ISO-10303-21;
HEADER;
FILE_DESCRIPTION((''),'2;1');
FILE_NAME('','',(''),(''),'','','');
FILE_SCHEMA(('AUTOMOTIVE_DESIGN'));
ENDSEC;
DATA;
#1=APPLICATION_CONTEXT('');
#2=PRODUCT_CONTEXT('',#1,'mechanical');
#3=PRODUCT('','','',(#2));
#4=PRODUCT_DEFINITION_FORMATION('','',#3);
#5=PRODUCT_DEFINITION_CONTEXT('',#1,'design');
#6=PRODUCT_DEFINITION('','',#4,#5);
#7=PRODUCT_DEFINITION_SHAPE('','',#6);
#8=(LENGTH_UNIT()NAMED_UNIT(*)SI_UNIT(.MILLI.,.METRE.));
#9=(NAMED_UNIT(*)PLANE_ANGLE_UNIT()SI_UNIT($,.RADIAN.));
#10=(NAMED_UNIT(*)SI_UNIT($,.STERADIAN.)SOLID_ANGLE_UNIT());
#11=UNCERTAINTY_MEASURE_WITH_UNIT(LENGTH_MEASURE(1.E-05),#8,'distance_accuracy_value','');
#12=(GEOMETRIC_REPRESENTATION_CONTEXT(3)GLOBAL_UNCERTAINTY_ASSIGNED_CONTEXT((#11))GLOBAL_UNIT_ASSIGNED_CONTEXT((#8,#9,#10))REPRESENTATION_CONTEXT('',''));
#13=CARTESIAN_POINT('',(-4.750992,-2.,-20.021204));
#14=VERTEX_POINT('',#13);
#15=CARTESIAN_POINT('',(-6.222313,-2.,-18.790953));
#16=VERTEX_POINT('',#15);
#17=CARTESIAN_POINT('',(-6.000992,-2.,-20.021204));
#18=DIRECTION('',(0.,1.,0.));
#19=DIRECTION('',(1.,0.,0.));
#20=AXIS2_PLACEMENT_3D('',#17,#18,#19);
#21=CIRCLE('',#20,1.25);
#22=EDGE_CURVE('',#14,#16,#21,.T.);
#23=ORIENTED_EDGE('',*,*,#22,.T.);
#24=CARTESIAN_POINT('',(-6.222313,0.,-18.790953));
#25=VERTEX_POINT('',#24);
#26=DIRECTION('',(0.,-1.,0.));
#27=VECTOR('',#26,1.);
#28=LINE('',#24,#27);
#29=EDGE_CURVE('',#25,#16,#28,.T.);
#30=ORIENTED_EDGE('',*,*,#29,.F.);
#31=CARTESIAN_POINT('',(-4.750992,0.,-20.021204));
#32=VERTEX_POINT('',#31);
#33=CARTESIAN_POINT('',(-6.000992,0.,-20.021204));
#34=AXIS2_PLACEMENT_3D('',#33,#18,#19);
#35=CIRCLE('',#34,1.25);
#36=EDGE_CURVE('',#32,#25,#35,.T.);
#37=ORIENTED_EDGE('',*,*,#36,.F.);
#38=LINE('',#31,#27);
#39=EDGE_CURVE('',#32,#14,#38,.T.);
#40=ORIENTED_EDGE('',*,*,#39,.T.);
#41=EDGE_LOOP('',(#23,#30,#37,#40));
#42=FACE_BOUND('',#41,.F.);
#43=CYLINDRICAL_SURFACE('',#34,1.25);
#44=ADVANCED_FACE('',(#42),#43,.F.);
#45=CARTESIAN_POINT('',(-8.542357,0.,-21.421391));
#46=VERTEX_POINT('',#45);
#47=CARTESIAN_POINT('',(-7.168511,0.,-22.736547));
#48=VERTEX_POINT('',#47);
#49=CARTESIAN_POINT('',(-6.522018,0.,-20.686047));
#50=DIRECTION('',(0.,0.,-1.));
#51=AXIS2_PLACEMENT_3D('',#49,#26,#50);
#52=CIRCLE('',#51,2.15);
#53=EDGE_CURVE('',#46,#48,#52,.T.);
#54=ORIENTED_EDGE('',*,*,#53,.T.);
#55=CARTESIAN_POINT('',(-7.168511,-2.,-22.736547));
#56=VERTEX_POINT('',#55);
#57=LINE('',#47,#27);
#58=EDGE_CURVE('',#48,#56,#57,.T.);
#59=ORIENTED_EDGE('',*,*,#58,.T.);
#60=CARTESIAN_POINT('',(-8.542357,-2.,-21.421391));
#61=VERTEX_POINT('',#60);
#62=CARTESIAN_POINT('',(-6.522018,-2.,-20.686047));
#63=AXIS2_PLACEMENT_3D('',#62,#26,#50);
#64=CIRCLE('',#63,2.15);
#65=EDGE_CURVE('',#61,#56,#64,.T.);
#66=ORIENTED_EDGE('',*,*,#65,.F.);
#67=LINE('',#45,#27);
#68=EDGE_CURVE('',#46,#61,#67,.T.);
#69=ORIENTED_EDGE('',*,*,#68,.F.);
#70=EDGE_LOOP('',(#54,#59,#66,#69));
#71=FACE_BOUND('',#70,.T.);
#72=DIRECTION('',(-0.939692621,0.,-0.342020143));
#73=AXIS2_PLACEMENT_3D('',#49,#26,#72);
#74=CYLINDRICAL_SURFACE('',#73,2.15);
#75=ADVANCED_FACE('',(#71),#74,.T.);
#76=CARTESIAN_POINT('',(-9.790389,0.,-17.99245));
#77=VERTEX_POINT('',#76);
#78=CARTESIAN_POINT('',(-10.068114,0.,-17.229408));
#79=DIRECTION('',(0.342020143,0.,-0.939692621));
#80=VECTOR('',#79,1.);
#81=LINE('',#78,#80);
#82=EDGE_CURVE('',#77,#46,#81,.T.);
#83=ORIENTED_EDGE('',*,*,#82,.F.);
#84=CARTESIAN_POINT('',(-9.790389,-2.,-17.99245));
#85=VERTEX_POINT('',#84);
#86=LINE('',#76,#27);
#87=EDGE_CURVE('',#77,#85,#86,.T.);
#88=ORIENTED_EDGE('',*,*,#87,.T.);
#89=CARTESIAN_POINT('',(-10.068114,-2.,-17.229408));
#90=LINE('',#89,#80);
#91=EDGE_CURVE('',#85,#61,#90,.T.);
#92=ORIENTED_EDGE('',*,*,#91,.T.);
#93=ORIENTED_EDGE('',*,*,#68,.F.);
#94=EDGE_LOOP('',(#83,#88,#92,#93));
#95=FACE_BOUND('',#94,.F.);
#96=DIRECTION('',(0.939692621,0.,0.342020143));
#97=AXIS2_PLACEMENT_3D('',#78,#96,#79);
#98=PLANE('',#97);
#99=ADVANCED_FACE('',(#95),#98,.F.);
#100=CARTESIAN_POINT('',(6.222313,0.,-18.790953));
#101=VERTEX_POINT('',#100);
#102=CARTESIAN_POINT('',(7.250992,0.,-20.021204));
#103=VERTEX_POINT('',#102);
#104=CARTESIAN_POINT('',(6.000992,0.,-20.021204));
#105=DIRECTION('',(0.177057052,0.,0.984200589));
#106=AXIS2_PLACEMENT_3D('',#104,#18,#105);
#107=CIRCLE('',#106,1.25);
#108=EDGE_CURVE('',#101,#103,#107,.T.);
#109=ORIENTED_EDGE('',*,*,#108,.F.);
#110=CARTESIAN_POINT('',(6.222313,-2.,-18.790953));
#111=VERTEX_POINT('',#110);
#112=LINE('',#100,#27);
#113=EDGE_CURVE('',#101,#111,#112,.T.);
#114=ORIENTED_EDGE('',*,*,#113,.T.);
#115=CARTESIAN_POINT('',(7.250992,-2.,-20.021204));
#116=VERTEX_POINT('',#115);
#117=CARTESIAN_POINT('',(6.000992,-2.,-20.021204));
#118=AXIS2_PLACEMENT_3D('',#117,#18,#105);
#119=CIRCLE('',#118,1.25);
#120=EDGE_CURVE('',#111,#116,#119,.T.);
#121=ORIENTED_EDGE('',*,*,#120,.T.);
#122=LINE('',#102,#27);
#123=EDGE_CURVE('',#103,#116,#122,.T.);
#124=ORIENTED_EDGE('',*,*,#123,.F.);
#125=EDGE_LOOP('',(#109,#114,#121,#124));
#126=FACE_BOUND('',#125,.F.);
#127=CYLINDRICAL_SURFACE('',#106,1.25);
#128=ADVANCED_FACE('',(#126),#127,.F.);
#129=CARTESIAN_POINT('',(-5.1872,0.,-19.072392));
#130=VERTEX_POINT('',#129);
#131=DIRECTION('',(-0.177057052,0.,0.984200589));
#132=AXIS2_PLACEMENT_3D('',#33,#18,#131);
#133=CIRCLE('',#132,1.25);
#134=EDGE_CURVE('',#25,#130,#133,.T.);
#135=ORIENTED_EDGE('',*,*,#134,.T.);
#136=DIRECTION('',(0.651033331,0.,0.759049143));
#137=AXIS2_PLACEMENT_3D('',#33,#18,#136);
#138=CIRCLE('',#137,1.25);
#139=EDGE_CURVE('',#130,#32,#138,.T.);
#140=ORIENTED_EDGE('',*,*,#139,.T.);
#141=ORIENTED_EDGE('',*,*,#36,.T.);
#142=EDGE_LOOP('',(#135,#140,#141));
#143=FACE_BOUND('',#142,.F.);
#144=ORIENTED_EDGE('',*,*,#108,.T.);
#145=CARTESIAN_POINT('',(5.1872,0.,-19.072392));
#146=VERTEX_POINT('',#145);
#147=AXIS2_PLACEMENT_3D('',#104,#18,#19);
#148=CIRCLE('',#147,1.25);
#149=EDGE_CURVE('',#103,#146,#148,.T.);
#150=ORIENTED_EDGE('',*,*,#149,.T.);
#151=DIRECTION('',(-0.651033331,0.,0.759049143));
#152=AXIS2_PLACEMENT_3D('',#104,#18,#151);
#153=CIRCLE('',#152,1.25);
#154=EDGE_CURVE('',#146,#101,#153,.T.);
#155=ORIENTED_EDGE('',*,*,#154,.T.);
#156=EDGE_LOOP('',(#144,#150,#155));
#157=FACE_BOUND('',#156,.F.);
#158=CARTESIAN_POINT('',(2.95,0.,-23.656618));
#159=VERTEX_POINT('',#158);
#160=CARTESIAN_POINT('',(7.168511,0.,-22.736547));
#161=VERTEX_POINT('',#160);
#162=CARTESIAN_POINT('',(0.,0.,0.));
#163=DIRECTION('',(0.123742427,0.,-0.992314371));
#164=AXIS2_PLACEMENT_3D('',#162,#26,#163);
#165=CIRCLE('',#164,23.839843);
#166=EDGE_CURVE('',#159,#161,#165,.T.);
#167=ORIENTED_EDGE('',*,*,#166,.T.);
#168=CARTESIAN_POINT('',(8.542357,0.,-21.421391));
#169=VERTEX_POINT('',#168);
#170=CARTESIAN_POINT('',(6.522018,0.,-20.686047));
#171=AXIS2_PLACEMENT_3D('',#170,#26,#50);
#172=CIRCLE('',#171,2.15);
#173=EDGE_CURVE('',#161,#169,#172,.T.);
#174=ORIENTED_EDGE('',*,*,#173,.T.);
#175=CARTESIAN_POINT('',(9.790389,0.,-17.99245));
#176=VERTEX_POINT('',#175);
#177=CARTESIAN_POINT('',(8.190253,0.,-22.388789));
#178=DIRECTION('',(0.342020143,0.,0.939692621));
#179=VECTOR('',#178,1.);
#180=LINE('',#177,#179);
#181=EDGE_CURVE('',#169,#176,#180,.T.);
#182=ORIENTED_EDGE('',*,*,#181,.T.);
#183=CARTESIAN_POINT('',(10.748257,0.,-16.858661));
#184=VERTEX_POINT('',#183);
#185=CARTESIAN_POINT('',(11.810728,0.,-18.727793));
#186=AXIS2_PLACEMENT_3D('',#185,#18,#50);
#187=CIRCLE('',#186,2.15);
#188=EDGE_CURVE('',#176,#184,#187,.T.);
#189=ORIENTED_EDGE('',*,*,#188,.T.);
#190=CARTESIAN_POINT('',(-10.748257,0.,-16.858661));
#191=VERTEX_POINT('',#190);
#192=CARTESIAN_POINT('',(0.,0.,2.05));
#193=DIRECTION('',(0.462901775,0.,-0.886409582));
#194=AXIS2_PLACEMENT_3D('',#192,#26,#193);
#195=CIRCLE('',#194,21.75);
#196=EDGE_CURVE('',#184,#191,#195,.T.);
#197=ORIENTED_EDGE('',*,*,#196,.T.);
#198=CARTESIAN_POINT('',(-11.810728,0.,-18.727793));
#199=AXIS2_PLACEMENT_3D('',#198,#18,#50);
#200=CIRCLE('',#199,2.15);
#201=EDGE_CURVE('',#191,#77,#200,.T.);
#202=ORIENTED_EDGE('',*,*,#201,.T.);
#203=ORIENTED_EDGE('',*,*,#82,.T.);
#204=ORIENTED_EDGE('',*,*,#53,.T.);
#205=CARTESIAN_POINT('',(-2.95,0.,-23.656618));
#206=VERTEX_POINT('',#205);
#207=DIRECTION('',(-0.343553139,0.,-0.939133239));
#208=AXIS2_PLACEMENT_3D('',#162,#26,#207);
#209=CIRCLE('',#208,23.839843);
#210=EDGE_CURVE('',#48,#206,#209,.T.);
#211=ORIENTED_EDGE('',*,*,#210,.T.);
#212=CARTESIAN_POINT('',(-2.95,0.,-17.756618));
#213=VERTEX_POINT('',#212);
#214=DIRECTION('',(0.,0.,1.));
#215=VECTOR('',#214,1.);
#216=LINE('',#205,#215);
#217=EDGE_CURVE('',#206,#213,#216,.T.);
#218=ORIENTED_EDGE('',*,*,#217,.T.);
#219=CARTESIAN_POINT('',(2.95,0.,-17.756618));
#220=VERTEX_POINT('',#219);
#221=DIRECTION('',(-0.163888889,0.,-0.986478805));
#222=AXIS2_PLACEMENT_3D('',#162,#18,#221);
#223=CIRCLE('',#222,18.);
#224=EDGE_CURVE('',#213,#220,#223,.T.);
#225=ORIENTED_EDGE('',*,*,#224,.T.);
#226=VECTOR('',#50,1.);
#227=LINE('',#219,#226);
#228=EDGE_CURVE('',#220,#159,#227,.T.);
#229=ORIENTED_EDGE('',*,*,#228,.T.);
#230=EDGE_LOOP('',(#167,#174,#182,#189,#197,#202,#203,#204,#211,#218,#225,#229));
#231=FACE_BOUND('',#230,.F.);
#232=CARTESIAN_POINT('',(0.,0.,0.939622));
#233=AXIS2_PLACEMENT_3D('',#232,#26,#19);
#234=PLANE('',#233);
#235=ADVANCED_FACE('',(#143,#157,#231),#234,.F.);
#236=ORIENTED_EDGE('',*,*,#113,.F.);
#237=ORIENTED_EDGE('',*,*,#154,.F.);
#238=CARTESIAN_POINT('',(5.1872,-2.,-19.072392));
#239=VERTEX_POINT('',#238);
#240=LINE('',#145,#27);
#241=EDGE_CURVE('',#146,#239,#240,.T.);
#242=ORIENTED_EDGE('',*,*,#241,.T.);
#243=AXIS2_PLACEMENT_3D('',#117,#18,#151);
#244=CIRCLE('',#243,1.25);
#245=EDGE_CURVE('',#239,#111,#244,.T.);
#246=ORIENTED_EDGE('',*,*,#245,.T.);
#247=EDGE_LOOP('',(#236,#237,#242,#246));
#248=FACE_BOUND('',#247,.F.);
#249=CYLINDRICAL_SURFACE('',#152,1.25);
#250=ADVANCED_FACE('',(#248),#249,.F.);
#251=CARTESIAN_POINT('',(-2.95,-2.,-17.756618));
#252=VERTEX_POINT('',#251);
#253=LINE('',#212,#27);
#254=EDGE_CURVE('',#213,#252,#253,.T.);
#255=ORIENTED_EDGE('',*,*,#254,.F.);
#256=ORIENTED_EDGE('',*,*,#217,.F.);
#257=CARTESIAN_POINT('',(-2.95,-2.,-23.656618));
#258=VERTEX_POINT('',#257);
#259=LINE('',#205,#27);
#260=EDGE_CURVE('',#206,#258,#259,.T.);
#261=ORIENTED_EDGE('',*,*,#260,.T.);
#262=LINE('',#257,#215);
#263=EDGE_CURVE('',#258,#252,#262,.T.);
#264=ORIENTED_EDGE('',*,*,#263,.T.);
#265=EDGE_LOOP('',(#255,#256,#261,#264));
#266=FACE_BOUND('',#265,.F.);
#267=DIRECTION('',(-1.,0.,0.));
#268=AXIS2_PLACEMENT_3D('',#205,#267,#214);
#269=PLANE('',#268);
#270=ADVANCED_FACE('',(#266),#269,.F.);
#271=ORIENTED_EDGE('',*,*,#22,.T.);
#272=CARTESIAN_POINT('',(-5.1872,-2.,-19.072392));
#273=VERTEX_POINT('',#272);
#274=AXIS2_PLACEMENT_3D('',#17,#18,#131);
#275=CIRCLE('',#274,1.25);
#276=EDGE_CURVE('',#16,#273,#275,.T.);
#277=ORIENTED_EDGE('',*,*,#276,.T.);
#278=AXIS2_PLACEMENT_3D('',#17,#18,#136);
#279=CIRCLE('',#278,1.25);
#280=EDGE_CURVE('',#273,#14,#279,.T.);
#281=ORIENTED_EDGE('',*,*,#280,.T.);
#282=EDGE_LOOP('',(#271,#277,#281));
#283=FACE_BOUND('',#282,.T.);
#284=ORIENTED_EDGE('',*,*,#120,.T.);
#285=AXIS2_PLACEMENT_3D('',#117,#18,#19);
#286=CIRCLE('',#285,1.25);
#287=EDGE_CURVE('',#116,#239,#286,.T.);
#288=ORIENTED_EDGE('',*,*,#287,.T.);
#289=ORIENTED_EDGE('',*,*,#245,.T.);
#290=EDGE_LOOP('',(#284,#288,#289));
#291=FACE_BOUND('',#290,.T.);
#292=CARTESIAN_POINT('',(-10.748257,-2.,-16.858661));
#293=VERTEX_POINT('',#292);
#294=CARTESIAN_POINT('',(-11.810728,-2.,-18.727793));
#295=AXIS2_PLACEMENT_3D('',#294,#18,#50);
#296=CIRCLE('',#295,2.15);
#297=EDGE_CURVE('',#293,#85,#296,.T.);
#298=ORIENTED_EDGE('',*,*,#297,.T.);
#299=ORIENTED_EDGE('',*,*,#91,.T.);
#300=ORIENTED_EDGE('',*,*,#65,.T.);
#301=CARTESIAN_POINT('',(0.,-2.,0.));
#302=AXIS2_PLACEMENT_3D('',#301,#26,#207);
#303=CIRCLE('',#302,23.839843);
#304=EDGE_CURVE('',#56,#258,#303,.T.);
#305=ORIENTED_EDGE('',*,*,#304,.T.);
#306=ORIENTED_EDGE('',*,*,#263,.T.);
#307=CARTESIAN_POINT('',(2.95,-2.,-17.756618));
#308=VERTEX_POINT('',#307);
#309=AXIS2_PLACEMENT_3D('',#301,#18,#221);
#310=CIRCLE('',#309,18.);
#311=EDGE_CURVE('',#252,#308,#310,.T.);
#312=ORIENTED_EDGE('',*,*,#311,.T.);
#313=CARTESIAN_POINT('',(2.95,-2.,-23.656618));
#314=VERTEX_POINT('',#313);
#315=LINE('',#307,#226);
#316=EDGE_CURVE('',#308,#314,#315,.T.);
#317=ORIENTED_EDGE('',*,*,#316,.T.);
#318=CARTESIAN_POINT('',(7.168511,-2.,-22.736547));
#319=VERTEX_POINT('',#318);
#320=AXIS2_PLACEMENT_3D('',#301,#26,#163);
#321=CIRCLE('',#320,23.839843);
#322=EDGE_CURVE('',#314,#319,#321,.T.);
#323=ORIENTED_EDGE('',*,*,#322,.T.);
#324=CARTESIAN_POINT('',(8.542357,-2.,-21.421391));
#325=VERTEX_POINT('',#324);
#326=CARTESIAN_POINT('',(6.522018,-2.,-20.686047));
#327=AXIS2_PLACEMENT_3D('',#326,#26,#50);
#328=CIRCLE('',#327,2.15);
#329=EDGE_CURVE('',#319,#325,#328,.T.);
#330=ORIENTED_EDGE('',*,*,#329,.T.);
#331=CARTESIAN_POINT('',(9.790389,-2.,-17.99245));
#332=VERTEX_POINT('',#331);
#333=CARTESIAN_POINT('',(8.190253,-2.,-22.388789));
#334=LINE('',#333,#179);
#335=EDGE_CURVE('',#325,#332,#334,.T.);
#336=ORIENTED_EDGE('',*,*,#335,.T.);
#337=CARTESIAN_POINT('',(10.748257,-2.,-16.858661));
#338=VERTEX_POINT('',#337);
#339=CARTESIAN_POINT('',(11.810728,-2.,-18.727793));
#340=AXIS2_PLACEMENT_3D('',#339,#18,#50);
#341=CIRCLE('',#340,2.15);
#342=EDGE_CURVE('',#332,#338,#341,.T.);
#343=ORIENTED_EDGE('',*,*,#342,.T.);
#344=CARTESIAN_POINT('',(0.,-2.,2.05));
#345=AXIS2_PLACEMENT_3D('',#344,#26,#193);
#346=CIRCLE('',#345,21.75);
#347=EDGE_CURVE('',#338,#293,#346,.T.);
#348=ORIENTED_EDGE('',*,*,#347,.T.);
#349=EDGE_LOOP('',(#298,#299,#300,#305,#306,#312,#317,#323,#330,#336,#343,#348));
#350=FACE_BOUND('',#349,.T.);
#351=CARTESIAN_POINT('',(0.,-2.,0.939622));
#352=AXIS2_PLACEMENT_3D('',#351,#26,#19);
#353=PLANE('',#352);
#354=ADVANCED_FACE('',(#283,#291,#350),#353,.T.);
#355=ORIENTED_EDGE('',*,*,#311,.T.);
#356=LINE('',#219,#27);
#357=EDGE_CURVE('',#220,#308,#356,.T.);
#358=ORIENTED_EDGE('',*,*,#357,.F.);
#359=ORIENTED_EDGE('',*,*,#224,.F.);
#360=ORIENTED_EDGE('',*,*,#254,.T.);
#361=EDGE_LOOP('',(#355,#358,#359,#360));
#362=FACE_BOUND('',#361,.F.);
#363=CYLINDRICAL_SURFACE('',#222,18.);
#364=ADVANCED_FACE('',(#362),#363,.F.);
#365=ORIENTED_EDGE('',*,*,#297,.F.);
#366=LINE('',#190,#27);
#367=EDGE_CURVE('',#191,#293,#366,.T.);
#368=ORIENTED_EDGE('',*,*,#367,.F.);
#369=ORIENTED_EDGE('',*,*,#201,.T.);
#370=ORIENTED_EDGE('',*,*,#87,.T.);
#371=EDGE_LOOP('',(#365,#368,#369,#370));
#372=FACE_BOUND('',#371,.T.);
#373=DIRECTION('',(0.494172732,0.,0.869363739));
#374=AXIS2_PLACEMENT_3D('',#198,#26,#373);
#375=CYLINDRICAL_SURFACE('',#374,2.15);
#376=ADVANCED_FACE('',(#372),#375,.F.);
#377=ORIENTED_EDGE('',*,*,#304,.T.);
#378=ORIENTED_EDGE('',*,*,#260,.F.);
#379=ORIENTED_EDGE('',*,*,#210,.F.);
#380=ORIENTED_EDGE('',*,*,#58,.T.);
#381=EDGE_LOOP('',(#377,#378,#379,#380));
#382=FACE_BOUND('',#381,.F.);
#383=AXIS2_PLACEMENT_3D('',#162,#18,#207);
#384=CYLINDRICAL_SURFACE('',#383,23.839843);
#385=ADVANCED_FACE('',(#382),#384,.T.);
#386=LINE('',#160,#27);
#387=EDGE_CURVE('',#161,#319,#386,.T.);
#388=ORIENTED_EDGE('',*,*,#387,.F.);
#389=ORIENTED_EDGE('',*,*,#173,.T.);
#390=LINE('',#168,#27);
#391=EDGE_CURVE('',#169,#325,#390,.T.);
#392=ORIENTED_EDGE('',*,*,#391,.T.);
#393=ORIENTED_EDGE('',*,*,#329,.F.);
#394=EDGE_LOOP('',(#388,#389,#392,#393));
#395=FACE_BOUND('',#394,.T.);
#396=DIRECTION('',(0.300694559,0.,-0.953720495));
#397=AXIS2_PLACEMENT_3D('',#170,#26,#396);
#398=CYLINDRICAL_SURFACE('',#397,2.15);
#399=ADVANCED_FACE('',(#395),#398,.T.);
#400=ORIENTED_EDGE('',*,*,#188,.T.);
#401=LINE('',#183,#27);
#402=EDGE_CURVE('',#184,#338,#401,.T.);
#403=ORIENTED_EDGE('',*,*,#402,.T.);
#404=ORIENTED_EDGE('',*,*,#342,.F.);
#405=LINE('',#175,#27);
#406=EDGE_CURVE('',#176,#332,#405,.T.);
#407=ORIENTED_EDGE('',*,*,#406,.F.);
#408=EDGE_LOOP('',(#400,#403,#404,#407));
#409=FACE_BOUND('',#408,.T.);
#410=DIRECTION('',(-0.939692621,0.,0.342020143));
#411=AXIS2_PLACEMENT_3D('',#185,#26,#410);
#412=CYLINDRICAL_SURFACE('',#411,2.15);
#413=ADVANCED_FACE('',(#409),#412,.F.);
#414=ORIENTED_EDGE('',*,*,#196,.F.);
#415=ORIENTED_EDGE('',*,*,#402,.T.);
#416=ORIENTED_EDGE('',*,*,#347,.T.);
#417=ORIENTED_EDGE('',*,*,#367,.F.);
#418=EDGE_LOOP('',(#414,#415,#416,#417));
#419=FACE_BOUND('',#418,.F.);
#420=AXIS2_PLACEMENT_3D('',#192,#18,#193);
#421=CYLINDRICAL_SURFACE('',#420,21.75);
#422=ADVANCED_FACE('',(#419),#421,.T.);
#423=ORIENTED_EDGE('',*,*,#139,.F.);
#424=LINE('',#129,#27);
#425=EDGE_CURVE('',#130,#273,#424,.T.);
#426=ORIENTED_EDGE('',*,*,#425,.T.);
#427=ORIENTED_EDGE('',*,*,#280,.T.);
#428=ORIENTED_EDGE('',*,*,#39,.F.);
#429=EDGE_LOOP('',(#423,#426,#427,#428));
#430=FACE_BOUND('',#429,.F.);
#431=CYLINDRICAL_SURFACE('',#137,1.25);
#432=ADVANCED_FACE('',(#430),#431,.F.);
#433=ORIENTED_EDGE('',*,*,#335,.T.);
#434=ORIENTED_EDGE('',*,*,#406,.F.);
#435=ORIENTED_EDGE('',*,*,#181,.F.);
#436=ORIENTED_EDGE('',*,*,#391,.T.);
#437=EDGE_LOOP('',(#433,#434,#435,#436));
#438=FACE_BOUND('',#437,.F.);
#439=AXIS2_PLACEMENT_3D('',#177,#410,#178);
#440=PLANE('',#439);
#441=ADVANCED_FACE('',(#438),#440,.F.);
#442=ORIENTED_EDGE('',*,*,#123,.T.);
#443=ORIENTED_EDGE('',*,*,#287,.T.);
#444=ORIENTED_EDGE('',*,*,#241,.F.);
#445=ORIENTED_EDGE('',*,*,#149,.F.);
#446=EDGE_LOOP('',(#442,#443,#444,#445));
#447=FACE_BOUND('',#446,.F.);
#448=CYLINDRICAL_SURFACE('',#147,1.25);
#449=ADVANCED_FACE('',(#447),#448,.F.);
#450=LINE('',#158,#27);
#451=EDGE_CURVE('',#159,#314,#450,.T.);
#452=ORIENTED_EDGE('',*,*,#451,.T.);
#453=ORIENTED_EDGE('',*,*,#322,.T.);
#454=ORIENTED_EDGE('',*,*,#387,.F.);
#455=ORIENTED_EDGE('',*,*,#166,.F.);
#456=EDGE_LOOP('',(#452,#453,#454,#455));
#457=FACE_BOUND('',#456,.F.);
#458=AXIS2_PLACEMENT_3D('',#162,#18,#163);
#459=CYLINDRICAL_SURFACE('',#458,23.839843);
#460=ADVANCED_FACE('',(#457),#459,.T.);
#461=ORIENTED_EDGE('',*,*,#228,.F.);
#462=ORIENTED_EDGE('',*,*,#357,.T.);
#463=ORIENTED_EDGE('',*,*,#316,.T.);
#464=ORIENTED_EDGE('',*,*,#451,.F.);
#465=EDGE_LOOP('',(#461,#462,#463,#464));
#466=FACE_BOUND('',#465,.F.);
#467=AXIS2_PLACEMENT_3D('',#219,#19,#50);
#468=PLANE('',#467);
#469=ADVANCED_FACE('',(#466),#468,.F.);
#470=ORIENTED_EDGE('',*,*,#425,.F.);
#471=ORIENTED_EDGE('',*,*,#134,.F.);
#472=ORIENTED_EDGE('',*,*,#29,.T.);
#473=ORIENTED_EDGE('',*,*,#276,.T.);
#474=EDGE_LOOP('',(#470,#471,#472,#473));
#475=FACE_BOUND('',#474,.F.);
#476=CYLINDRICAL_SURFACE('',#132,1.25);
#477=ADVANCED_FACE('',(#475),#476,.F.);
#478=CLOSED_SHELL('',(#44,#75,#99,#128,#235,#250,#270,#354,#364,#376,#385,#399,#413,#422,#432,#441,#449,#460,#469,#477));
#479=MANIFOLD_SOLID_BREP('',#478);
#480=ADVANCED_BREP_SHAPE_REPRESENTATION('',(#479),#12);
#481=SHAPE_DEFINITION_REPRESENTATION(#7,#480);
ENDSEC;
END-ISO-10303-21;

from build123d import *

# Parameters (mm, degrees)
F1_DEPTH = 2
F2_R     = 2.15


# Not quite as in the source:
# - a feature names something its author has since deleted; it is built from what else it names


with BuildPart() as f1:
    # F0 (on Front) → F1 (new body)
    with BuildSketch(Plane.XZ):
        with BuildLine():
            ThreePointArc((-2.95, -17.7566184844), (0, 18), (2.95, -17.7566184844))
            Line((2.95, -17.7566184844), (2.95, -19.4990138986))
            ThreePointArc((2.95, -19.4990138986), (4.0741879212, -19.3150062668), (5.1871999415, -19.0723923069))
            ThreePointArc((5.1871999415, -19.0723923069), (5.6730323101, -18.8149936793), (6.2223129211, -18.7909529991))
            ThreePointArc((6.2223129211, -18.7909529991), (8.1825487808, -18.102131288), (10.0681136131, -17.2294084005))
            ThreePointArc((10.0681136131, -17.2294084005), (0, 23.8), (-10.0681136131, -17.2294084005))
            ThreePointArc((-10.0681136131, -17.2294084005), (-8.1825487808, -18.102131288), (-6.2223129211, -18.7909529991))
            ThreePointArc((-6.2223129211, -18.7909529991), (-5.6730323101, -18.8149936793), (-5.1871999415, -19.0723923069))
            ThreePointArc((-5.1871999415, -19.0723923069), (-4.0741879212, -19.3150062668), (-2.95, -19.4990138986))
            Line((-2.95, -19.4990138986), (-2.95, -17.7566184844))
        make_face()
        with BuildLine():
            ThreePointArc((5.1871999415, -19.0723923069), (4.0741879212, -19.3150062668), (2.95, -19.4990138986))
            Line((2.95, -19.4990138986), (2.95, -23.6566184844))
            ThreePointArc((2.95, -23.6566184844), (5.6060820605, -23.1713172273), (8.1902527715, -22.3887886599))
            Line((8.1902527715, -22.3887886599), (10.0681136131, -17.2294084005))
            ThreePointArc((10.0681136131, -17.2294084005), (8.1825487808, -18.102131288), (6.2223129211, -18.7909529991))
            ThreePointArc((6.2223129211, -18.7909529991), (6.9599367667, -19.2193782076), (7.2509916054, -20.0212037359))
            ThreePointArc((7.2509916054, -20.0212037359), (5.4788515763, -21.1569280818), (5.1871999415, -19.0723923069))
        make_face()
        with BuildLine():
            Line((-2.95, -23.6566184844), (-2.95, -19.4990138986))
            ThreePointArc((-2.95, -19.4990138986), (-4.0741879212, -19.3150062668), (-5.1871999415, -19.0723923069))
            ThreePointArc((-5.1871999415, -19.0723923069), (-4.8652672595, -19.4990637067), (-4.7509916054, -20.0212037359))
            ThreePointArc((-4.7509916054, -20.0212037359), (-6.8028171337, -20.9801488971), (-6.2223129211, -18.7909529991))
            ThreePointArc((-6.2223129211, -18.7909529991), (-8.1825487808, -18.102131288), (-10.0681136131, -17.2294084005))
            Line((-10.0681136131, -17.2294084005), (-8.1902527715, -22.3887886599))
            ThreePointArc((-8.1902527715, -22.3887886599), (-5.6060820605, -23.1713172273), (-2.95, -23.6566184844))
        make_face()
    extrude(amount=F1_DEPTH)

    # F2
    f2_edges = [f1.edges().sort_by_distance(p)[0] for p in [
        (-10.068114, -1, -17.229408),
        (-8.190253, -1, -22.388789),
        (8.190253, -1, -22.388789),
        (10.068114, -1, -17.229408),
    ]]
    fillet(f2_edges, radius=F2_R)


solid = f1.part
